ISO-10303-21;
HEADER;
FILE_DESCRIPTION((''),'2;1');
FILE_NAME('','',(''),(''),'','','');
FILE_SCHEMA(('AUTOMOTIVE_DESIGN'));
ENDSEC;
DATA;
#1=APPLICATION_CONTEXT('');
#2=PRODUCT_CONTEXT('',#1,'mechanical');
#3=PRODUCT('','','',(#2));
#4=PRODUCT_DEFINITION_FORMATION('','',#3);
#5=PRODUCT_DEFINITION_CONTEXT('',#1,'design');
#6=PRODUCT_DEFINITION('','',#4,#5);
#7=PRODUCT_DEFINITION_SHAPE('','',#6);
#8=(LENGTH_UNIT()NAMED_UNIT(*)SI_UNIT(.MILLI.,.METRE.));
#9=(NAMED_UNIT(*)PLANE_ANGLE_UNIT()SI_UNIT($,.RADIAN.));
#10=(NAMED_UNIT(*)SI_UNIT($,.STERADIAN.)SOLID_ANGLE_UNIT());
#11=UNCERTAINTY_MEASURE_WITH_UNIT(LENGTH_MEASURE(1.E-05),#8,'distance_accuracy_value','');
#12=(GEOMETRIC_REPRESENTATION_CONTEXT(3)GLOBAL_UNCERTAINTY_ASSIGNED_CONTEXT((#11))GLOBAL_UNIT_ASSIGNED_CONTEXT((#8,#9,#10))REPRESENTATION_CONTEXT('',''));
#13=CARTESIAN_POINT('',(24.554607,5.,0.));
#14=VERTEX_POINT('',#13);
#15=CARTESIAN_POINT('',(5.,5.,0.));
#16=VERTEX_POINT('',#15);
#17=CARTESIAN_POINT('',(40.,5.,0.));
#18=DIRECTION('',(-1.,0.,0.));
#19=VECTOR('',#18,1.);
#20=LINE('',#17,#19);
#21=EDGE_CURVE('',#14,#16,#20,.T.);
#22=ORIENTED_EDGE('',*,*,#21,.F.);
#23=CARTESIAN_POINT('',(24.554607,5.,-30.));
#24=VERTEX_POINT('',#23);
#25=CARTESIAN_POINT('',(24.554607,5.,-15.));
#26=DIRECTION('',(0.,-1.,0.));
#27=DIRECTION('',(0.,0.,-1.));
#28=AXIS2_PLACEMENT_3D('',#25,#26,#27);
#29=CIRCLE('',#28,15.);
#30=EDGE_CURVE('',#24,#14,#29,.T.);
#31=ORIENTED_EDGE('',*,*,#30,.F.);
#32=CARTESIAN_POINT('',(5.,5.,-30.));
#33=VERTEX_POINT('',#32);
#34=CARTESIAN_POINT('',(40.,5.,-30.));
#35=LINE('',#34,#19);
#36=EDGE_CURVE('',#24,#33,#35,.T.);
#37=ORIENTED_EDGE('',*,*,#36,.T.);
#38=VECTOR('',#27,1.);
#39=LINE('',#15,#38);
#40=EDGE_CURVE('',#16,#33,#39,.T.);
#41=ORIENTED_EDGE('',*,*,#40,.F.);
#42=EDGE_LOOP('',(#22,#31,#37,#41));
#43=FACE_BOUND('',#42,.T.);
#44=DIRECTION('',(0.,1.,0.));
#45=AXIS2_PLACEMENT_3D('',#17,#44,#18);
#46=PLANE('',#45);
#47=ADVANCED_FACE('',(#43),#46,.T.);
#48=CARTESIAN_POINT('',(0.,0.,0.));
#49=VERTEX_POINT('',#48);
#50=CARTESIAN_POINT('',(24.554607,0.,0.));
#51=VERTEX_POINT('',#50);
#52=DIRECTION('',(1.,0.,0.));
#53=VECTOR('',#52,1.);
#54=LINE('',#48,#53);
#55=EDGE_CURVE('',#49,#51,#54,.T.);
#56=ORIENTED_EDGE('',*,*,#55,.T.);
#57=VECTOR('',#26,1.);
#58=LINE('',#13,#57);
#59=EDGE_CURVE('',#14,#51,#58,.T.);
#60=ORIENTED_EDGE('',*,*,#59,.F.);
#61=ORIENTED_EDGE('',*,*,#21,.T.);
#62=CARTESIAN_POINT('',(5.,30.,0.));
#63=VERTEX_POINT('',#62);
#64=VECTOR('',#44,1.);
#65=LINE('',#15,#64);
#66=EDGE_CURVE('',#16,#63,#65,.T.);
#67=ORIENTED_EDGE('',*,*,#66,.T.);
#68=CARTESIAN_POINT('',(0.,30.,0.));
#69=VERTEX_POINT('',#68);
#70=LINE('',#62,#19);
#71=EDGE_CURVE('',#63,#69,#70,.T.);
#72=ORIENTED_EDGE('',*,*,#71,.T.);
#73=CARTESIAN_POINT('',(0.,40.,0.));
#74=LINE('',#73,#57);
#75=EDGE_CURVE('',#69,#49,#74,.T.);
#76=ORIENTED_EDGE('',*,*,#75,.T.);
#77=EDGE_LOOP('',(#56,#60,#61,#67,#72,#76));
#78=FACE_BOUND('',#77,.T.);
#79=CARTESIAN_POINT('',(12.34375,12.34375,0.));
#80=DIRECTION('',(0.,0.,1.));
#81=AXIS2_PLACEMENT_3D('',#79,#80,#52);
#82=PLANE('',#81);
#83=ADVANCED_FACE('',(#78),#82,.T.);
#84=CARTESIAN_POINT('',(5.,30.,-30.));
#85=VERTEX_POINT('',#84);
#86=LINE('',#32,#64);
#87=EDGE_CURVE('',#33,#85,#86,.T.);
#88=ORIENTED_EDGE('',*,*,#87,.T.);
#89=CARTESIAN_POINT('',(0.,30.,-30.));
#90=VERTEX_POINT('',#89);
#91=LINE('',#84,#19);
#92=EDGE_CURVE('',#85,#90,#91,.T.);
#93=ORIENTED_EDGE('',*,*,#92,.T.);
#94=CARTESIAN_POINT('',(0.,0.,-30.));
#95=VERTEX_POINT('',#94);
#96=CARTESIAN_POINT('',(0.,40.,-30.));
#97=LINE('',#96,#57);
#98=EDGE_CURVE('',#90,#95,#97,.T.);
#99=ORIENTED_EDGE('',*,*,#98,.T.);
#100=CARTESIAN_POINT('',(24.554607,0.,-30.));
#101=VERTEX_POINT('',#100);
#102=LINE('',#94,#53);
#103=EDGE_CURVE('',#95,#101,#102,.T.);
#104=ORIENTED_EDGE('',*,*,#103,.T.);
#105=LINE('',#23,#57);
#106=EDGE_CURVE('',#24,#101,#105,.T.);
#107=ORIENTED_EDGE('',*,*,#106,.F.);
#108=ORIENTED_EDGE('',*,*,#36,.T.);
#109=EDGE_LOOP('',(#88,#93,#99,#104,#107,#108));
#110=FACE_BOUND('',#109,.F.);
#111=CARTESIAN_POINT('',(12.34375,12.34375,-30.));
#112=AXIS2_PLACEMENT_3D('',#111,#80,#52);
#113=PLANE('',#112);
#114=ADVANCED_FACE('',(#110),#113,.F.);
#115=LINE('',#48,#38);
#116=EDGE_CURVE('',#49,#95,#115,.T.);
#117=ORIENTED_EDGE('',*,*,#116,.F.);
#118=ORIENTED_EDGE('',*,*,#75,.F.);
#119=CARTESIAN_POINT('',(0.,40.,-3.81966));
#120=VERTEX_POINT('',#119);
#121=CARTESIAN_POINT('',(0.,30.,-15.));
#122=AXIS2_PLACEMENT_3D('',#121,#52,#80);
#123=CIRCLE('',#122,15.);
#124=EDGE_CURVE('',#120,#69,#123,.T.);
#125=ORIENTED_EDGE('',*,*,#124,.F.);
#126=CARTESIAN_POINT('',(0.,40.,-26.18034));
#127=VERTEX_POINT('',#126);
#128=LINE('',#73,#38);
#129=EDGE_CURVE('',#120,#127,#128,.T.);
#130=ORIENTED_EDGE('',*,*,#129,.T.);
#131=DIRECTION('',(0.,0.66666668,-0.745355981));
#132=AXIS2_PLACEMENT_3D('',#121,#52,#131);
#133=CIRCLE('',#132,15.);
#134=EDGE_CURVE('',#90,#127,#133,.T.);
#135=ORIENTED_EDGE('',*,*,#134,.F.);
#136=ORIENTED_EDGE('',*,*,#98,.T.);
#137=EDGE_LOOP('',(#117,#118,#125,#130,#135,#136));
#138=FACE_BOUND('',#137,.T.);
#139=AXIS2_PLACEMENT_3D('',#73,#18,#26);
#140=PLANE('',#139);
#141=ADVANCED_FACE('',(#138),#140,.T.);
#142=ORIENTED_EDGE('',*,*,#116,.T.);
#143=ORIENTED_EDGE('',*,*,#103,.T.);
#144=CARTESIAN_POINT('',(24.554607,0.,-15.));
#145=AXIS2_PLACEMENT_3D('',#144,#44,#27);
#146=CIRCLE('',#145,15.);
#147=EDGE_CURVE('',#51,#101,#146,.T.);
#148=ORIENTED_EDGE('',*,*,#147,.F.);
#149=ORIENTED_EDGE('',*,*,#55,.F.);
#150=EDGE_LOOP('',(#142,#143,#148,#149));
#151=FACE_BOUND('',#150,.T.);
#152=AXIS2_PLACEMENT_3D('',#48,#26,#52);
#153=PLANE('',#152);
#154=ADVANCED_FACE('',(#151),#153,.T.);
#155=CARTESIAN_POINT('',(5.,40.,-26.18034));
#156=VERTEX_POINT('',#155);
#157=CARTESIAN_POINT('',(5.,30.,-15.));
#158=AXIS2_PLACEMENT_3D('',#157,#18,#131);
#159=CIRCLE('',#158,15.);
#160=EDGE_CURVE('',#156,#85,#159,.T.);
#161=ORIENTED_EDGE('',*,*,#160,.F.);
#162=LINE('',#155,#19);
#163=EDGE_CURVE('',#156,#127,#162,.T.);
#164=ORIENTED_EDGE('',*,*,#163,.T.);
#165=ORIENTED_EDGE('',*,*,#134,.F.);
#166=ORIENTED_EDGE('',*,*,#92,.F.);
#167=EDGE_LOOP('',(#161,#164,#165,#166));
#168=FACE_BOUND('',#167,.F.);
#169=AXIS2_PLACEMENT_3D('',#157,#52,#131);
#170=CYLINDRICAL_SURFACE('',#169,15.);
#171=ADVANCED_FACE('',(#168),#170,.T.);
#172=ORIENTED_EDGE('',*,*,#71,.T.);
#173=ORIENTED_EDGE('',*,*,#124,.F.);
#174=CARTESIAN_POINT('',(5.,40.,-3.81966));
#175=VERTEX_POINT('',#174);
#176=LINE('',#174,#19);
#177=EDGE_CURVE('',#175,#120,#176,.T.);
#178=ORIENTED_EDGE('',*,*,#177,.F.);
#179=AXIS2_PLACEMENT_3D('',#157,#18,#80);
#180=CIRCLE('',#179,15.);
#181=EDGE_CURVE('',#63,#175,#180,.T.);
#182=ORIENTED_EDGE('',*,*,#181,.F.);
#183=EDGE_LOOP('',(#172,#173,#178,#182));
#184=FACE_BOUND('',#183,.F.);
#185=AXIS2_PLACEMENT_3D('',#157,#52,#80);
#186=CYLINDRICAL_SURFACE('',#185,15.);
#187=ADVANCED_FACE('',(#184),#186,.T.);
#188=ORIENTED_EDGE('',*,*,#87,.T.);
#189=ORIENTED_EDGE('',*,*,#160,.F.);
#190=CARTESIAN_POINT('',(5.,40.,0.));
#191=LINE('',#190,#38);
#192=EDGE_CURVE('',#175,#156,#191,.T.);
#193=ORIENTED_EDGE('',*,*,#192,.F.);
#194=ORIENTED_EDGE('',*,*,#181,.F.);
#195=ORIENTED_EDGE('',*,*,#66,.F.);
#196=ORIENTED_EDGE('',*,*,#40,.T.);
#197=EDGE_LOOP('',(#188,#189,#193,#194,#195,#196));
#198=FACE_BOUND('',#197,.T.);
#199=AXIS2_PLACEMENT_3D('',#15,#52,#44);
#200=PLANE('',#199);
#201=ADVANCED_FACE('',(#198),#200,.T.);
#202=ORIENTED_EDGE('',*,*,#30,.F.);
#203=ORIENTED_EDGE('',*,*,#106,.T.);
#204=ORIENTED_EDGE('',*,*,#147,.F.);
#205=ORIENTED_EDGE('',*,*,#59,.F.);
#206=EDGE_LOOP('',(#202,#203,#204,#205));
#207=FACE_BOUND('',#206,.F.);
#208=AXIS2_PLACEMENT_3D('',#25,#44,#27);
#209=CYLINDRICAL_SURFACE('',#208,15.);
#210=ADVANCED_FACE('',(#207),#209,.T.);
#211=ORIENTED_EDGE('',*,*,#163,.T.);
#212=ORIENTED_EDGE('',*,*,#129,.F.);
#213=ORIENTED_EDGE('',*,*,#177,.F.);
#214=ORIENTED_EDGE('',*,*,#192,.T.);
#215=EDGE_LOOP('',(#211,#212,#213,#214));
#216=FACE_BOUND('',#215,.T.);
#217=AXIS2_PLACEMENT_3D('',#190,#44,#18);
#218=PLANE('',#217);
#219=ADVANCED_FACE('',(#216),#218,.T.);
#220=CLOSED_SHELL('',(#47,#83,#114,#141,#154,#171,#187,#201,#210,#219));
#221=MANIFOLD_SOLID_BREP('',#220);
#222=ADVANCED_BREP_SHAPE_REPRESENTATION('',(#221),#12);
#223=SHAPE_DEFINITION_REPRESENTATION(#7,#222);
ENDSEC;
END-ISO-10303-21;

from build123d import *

# Parameters (mm, degrees)
F1_DEPTH = 30
F3_DEPTH = 15.3
F5_DEPTH = 25


with BuildPart() as f1:
    # F0 (on Top) → F1 (new body)
    with BuildSketch(Plane.XY):
        Polygon((4.9999998882, 40), (0, 40), (0, 0), (40, 0), (40, 4.9999998882), (4.9999998882, 4.9999998882), align=None)
    extrude(amount=-F1_DEPTH)

    # F2 (on face) → F3 (cut)
    with BuildSketch(Plane.YZ.offset(4.9999998882)):
        with BuildLine():
            Line((40, -3.8196602917), (40, 0))
            Line((40, 0), (29.9999997997, 0))
            ThreePointArc((29.9999997997, 0), (35.3523312718, -0.9874146635), (40, -3.8196602917))
        make_face()
        with BuildLine():
            Line((40, -30), (40, -26.1803397083))
            ThreePointArc((40, -26.1803397083), (35.3523313132, -29.0125853207), (29.9999998882, -30))
            Line((29.9999998882, -30), (40, -30))
        make_face()
    extrude(amount=-F3_DEPTH, mode=Mode.SUBTRACT)

    # F4 (on face) → F5 (cut)
    with BuildSketch(Plane(origin=(0, 4.9999998882, 0), x_dir=(-1, 0, 0), z_dir=(0, 1, 0))):
        with BuildLine():
            Line((-24.5546065271, 0), (-40, 0))
            Line((-40, 0), (-40, -30))
            Line((-40, -30), (-24.5546074611, -30))
            ThreePointArc((-24.5546074611, -30), (-39.5546074611, -14.999999533), (-24.5546065271, 0))
        make_face()
    extrude(amount=-F5_DEPTH, mode=Mode.SUBTRACT)


solid = f1.part
